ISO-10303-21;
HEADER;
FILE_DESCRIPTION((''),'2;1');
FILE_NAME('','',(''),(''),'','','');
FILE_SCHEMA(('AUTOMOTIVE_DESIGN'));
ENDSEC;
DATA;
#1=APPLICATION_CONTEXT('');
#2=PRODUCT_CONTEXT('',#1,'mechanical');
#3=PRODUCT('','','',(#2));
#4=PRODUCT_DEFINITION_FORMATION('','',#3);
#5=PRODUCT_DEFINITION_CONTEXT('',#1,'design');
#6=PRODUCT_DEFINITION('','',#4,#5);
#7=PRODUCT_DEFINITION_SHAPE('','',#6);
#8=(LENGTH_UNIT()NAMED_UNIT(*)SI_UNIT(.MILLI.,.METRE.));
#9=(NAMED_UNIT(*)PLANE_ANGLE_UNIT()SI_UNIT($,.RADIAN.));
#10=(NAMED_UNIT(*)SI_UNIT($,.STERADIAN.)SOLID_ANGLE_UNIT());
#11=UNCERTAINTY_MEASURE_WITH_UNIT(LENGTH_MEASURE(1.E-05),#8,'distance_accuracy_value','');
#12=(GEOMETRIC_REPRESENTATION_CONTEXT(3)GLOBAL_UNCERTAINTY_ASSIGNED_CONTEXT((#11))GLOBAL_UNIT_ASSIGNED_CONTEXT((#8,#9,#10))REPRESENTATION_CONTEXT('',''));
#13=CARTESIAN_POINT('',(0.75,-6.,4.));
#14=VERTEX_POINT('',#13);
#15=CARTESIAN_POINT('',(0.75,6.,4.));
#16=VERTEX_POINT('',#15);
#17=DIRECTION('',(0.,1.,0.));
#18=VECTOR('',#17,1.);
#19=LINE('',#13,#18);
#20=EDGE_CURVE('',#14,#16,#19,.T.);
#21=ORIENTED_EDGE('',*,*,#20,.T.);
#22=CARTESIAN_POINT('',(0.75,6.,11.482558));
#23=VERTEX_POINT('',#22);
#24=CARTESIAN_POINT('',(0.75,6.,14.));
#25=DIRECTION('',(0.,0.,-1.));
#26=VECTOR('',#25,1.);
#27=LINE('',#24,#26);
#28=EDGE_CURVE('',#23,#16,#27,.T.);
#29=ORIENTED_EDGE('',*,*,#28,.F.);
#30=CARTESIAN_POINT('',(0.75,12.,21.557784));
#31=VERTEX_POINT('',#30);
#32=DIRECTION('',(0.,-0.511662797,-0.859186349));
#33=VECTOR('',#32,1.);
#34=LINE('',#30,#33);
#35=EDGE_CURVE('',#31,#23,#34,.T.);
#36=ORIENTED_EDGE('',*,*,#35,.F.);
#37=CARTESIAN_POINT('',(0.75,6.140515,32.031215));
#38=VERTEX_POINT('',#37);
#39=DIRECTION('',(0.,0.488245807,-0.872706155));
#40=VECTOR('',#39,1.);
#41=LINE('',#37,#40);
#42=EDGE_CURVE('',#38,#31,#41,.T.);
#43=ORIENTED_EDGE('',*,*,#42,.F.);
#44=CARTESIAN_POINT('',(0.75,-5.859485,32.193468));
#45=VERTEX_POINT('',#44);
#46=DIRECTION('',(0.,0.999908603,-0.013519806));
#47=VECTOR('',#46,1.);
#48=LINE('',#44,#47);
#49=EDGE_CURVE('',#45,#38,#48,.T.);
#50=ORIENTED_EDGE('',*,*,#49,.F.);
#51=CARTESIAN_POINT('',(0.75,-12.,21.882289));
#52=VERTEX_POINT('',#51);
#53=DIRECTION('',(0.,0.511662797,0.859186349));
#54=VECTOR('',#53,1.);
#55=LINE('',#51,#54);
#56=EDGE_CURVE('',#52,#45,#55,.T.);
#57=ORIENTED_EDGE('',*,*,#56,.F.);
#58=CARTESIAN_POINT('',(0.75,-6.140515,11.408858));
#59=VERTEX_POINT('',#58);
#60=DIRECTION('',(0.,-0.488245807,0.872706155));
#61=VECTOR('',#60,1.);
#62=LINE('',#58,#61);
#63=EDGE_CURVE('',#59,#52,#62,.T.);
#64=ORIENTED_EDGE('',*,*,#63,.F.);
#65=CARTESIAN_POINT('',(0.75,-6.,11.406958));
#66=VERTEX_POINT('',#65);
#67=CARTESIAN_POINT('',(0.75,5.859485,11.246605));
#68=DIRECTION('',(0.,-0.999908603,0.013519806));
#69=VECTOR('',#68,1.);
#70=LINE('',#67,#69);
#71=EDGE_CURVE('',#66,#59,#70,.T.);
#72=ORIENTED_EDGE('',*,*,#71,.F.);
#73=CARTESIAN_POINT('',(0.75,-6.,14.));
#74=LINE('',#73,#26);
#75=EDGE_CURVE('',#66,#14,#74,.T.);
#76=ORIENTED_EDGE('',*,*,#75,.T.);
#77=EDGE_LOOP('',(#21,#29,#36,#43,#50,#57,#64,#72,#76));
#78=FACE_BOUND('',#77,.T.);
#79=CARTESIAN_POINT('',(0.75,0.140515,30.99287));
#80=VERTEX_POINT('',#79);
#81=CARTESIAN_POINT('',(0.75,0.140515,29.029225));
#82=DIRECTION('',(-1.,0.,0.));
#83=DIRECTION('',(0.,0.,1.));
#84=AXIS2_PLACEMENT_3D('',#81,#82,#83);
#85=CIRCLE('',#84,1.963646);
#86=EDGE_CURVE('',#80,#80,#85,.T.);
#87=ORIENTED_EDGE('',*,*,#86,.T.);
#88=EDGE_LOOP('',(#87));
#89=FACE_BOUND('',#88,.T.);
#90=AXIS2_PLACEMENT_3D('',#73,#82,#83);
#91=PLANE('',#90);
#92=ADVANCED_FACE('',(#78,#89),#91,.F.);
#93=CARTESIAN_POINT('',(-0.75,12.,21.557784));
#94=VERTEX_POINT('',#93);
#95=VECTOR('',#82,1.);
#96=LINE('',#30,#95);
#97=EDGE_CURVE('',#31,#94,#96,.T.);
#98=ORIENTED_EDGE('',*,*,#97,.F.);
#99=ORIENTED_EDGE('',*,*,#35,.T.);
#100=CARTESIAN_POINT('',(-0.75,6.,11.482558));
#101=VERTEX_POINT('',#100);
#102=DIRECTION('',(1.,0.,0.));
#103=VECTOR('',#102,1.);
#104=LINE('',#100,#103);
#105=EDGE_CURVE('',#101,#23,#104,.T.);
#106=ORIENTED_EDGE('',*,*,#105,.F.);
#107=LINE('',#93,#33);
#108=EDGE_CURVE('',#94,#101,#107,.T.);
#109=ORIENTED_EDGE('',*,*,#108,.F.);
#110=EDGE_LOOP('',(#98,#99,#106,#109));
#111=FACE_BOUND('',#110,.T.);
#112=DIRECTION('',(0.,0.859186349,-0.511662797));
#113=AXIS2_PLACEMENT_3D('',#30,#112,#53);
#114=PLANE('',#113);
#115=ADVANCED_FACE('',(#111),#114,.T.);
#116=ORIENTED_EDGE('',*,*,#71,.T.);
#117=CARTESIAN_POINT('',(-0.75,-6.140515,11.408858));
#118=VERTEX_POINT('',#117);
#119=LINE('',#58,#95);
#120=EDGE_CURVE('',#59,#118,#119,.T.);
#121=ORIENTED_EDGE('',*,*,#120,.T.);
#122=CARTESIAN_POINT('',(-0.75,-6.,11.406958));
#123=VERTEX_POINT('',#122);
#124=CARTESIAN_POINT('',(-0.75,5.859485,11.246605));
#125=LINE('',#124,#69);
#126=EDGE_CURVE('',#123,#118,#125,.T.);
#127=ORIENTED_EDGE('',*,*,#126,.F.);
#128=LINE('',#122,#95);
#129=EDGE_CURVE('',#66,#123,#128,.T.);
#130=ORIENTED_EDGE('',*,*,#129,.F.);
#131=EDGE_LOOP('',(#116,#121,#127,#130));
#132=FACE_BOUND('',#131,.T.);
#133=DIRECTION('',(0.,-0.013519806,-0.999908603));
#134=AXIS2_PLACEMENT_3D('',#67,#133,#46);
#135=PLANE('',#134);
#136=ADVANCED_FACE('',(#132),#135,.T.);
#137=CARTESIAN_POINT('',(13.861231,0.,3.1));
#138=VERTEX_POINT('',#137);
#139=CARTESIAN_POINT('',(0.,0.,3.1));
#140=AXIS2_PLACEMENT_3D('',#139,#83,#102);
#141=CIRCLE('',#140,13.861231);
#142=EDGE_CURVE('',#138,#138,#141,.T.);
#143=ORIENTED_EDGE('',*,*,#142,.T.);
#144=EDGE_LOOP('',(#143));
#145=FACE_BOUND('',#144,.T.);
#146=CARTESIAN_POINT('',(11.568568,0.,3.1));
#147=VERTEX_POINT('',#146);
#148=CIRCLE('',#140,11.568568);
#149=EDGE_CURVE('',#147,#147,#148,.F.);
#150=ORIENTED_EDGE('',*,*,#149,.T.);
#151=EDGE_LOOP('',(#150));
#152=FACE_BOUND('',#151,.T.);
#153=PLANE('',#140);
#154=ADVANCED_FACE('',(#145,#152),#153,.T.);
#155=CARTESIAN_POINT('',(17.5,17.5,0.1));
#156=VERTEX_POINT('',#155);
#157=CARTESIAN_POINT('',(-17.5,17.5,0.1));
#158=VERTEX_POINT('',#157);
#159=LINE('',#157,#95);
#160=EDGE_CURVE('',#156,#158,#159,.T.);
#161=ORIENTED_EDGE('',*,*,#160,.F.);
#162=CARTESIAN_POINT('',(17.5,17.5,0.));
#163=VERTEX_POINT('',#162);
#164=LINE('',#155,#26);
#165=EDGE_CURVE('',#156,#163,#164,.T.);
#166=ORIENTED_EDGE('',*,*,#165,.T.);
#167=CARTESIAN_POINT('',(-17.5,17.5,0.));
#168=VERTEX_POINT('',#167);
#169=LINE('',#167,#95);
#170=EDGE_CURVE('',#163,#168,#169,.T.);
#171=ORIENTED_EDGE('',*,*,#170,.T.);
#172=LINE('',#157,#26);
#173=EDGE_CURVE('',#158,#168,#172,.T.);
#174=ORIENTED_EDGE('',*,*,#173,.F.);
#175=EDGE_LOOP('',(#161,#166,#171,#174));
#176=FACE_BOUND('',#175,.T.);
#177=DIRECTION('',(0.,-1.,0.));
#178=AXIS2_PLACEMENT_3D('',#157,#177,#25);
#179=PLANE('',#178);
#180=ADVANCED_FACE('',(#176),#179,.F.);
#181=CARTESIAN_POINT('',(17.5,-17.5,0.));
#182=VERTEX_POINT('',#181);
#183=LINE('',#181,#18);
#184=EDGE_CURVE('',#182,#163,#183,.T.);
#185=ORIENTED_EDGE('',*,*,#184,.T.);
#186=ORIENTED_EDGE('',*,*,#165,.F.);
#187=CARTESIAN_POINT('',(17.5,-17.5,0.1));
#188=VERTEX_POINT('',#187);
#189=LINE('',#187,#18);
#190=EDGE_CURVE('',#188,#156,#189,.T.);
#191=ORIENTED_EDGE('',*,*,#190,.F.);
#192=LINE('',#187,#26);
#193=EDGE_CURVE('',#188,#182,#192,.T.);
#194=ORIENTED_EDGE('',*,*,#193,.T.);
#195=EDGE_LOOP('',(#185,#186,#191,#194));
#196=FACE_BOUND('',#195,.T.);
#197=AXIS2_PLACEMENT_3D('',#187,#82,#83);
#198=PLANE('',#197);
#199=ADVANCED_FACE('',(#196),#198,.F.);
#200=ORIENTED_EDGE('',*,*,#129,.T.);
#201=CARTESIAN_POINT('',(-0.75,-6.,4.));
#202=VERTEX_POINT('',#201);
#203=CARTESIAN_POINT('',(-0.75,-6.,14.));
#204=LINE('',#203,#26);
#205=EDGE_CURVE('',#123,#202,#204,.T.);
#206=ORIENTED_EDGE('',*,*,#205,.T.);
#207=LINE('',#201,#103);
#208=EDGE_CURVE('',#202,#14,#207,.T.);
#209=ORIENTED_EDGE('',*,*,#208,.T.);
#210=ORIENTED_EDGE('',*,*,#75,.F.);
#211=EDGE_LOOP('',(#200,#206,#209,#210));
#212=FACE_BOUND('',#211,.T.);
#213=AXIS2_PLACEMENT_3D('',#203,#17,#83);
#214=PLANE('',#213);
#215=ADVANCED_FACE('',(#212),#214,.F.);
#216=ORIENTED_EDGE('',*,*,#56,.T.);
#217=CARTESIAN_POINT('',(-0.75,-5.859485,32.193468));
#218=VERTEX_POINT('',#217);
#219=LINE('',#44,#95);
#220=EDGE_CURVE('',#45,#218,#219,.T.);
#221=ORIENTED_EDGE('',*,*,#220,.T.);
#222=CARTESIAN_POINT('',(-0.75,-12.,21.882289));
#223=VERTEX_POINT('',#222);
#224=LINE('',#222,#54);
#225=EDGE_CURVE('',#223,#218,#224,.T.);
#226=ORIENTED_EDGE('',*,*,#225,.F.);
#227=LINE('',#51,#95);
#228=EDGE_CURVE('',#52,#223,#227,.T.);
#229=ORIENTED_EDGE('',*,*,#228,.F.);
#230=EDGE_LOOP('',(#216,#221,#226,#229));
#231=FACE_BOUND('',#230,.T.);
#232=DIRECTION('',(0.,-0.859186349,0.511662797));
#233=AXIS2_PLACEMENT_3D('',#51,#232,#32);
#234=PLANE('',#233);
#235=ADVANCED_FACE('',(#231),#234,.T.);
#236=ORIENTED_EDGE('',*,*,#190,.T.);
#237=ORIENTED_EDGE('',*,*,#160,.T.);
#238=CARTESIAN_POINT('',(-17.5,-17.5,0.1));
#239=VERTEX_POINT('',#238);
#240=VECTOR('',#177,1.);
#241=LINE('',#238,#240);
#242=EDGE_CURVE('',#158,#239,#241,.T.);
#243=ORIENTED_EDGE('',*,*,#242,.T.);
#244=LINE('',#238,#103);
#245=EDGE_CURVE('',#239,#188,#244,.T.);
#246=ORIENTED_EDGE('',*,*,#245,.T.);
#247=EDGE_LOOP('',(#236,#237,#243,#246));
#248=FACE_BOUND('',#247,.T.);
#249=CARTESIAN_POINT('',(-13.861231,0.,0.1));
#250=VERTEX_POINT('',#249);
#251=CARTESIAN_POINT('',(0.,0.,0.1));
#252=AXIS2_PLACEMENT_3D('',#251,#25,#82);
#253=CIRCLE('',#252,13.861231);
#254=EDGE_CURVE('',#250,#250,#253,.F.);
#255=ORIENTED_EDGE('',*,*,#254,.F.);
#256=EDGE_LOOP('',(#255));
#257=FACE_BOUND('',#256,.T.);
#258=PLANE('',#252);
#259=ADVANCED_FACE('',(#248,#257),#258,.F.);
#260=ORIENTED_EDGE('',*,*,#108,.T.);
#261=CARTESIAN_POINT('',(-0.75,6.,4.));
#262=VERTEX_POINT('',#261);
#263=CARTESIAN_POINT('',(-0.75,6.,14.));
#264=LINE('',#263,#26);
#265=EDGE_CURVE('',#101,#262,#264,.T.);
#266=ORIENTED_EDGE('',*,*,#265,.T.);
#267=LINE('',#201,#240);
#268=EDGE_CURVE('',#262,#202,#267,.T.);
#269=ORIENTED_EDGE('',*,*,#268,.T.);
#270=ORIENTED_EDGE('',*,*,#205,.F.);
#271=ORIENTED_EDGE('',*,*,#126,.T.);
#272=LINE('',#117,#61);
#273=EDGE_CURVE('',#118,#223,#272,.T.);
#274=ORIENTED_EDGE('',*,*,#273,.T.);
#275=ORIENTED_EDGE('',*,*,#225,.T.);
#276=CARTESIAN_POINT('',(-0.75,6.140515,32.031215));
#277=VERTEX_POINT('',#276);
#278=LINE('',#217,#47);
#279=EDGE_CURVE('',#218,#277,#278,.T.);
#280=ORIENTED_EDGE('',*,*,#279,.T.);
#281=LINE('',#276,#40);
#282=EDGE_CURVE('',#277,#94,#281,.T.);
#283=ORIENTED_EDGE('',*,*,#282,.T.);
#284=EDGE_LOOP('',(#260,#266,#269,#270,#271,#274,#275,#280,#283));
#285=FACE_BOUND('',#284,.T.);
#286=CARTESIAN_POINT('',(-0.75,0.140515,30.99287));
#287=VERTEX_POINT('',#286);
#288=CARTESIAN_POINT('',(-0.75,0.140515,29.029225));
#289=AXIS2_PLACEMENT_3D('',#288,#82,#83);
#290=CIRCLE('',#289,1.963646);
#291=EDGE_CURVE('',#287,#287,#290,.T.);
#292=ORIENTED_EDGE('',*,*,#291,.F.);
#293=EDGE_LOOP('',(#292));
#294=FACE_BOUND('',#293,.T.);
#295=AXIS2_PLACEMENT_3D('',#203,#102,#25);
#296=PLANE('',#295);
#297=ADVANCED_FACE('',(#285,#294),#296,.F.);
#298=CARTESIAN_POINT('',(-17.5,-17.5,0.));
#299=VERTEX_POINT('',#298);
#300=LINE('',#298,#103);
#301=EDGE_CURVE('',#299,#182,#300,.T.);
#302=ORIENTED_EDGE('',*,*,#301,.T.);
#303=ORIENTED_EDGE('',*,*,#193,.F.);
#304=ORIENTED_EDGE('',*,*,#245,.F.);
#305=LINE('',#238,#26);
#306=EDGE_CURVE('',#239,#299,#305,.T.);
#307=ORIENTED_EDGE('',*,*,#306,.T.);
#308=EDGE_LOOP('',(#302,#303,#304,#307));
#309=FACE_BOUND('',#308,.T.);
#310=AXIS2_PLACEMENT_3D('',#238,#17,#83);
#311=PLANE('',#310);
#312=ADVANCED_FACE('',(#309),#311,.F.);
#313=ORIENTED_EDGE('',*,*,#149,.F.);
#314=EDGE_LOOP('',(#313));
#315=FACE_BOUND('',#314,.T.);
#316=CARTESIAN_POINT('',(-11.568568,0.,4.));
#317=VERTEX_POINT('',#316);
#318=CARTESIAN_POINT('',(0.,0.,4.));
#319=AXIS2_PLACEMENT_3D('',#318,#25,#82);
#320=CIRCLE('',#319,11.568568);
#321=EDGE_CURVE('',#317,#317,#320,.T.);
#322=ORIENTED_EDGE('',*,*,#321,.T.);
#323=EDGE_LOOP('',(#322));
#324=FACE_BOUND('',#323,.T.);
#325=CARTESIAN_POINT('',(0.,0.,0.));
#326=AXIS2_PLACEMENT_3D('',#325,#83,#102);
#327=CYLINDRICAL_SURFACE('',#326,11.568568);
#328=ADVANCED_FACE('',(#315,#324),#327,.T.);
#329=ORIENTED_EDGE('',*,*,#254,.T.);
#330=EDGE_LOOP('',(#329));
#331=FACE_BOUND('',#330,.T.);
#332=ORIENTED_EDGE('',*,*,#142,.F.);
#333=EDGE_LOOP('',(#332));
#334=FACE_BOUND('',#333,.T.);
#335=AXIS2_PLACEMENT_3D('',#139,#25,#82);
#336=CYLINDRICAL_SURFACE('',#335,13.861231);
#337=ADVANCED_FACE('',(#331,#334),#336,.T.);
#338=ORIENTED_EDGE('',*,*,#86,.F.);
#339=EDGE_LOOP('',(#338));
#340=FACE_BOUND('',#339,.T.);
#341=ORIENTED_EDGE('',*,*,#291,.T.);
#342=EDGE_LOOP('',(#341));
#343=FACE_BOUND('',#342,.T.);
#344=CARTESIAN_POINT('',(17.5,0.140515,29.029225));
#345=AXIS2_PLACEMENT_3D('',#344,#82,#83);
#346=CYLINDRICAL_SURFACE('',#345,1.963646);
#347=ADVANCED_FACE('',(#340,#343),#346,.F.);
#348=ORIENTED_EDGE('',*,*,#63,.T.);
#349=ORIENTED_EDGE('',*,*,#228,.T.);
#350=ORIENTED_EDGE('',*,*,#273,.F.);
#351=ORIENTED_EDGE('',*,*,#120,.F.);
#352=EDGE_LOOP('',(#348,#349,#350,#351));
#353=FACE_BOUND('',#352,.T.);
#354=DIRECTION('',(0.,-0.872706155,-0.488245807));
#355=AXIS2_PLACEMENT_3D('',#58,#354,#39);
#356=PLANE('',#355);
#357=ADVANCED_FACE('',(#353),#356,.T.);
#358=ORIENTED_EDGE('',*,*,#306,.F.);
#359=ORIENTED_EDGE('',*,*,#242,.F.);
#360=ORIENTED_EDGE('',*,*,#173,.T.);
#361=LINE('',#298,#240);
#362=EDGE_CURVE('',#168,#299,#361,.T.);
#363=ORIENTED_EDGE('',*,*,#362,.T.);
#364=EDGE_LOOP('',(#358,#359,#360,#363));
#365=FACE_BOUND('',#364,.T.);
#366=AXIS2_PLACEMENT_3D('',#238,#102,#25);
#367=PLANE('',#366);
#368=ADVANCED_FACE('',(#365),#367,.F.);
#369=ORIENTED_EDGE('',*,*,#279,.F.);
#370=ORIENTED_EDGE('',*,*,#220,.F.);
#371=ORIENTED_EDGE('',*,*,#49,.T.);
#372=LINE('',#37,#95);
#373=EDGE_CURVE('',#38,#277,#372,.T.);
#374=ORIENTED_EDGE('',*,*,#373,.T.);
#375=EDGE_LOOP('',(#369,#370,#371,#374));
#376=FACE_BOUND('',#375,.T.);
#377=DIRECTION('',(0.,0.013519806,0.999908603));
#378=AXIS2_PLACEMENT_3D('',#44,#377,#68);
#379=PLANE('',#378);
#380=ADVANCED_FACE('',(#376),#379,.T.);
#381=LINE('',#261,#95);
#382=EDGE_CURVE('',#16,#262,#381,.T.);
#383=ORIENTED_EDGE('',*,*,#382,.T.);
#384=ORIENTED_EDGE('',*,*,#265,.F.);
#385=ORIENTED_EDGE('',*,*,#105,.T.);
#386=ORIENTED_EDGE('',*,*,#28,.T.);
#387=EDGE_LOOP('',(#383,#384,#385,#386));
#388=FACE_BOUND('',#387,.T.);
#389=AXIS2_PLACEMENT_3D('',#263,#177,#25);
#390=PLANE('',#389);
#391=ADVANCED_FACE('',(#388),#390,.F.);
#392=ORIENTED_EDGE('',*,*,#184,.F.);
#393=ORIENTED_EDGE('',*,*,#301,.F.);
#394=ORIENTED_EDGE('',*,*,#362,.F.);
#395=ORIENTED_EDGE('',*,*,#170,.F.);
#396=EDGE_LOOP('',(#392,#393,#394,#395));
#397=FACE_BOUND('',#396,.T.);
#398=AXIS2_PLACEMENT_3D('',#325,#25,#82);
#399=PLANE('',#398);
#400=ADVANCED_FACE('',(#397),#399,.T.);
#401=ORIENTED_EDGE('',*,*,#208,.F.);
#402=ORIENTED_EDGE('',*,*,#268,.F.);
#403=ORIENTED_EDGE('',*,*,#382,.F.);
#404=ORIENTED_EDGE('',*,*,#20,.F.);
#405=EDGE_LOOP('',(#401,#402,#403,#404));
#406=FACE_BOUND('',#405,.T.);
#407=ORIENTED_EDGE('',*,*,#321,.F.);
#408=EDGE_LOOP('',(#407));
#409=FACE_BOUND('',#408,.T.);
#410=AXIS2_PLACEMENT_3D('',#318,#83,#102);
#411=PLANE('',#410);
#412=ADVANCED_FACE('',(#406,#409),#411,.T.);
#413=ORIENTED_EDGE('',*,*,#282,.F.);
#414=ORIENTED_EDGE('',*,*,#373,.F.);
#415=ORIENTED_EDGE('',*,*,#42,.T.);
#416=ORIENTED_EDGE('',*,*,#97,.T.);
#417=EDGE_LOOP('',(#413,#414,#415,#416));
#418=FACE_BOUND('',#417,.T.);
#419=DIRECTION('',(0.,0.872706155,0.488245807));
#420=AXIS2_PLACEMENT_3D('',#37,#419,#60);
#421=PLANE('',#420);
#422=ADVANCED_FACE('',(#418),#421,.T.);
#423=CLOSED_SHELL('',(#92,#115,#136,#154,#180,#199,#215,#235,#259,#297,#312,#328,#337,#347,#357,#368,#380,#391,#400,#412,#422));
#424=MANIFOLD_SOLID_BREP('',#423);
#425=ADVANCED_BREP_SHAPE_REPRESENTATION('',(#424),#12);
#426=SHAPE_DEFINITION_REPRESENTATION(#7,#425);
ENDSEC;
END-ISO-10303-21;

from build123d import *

# Parameters (mm, degrees)
CROQUIS1_W                  = 35
CROQUIS1_H                  = 35
SALIENTE_EXTRUIR1_DEPTH     = 0.1
CROQUIS2_R                  = 13.861230549
SALIENTE_EXTRUIR2_DEPTH     = 3
SALIENTE_EXTRUIR4_START     = 3.1
SALIENTE_EXTRUIR4_OUTLINE_R = 11.568568339
SALIENTE_EXTRUIR4_DEPTH     = 0.9
CROQUIS6_W                  = 1.5
CROQUIS6_H                  = 12
SALIENTE_EXTRUIR6_DEPTH     = 10
SALIENTE_EXTRUIR7_DEPTH     = 1.5
CROQUIS8_R                  = 1.963645542
CORTAR_EXTRUIR1_DEPTH       = 41.93570388


# Read off the part's stored shape, not the designer's step: Saliente-Extruir4
with BuildPart() as part:
    # Croquis1 → Saliente-Extruir1 (new body)
    with BuildSketch(Plane.XY):
        Rectangle(CROQUIS1_W, CROQUIS1_H)
    extrude(amount=SALIENTE_EXTRUIR1_DEPTH)

    # Croquis2 → Saliente-Extruir2 (add)
    with BuildSketch(Plane.XY.offset(0.1)):
        with Locations(Location((0, 0, 0), (0, 0, 180))):
            Circle(CROQUIS2_R)
    extrude(amount=SALIENTE_EXTRUIR2_DEPTH)

    # Saliente-Extruir4 outline → Saliente-Extruir4 (add)
    with BuildSketch(Plane.XY.offset(SALIENTE_EXTRUIR4_START)):
        Circle(SALIENTE_EXTRUIR4_OUTLINE_R)
    extrude(amount=SALIENTE_EXTRUIR4_DEPTH)

    # Croquis6 → Saliente-Extruir6 (add)
    with BuildSketch(Plane.XY.offset(4)):
        Rectangle(CROQUIS6_W, CROQUIS6_H)
    extrude(amount=SALIENTE_EXTRUIR6_DEPTH)

    # Croquis7 → Saliente-Extruir7 (add)
    with BuildSketch(Plane.ZY.offset(0.75)):
        Polygon((11.246605352, 5.859485217), (11.408857848, -6.140514783), (21.882288941, -12), (32.193467539, -5.859485217), (32.031215043, 6.140514783), (21.557783949, 12), align=None)
    extrude(amount=-SALIENTE_EXTRUIR7_DEPTH)

    # Croquis8 → Cortar-Extruir1 (cut, through all)
    with BuildSketch(Plane.ZY.offset(0.75)):
        with Locations((29.029224945, 0.140514783)):
            Circle(CROQUIS8_R)
    extrude(amount=-CORTAR_EXTRUIR1_DEPTH, mode=Mode.SUBTRACT)


solid = part.part
